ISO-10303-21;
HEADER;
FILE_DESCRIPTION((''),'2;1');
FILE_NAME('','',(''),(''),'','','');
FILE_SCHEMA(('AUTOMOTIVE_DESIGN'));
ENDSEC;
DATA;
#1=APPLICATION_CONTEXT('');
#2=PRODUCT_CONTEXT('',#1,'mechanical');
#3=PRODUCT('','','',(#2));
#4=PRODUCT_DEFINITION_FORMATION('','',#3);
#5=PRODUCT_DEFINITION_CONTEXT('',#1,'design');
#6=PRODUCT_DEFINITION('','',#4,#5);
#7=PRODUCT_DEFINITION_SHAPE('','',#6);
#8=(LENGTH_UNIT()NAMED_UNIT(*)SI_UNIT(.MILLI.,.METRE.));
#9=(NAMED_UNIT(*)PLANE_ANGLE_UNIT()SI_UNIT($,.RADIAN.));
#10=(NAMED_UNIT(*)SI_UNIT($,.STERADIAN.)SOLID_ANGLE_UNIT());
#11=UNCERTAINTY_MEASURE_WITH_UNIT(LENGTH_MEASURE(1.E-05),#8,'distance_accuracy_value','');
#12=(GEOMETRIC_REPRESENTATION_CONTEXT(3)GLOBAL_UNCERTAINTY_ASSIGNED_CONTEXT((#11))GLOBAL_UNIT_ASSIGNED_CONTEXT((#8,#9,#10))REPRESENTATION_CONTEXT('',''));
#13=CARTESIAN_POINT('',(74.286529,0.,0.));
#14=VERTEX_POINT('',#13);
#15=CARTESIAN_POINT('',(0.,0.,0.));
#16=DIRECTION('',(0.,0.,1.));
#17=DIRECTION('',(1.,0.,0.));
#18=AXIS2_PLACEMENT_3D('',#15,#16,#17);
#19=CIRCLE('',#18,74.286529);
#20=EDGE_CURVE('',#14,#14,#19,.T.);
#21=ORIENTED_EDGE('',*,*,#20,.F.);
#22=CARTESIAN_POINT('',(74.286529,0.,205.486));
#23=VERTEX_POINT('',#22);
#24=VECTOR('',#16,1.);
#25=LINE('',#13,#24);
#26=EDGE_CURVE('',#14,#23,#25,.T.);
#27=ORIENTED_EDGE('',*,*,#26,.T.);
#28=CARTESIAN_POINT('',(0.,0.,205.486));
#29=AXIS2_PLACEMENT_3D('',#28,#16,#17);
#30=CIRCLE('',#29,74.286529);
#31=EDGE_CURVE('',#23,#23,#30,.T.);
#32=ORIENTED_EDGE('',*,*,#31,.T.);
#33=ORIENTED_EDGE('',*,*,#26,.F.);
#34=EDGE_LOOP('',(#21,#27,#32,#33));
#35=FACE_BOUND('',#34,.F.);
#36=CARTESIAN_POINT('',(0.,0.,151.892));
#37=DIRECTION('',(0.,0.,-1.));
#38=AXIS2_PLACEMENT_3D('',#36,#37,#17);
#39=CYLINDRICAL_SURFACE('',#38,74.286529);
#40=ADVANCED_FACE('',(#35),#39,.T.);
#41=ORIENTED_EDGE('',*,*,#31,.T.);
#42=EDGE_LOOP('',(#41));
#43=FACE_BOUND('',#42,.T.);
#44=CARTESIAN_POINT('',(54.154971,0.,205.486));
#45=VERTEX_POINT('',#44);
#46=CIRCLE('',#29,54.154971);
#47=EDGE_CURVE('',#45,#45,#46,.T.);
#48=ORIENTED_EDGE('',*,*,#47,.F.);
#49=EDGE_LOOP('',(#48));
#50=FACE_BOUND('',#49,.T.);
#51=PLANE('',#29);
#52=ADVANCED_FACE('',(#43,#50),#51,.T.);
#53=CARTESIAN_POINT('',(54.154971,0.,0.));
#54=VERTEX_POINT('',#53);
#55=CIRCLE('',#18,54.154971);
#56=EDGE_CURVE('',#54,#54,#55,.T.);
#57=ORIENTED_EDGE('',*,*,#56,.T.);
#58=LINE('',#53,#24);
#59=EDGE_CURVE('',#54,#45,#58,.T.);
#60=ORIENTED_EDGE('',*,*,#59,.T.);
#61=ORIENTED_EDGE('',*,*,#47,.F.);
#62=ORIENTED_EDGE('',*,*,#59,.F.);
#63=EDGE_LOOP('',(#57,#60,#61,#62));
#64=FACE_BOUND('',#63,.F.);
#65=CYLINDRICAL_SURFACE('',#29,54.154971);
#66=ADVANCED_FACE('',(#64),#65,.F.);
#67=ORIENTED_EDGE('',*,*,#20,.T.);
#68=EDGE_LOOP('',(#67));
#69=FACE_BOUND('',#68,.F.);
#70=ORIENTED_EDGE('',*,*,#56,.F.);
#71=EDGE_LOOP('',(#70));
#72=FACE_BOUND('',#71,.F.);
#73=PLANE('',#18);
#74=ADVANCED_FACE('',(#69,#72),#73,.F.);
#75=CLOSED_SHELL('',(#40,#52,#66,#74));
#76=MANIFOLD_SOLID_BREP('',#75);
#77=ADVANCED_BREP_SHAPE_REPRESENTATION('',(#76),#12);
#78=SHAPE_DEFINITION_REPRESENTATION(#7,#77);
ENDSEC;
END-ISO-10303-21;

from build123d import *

# Parameters (mm, degrees)
F0_R     = 74.2865291694
F1_DEPTH = 151.892
F2_DEPTH = 53.594
F3_R     = 54.1549709352
F4_DEPTH = 195.58
F5_DEPTH = 92.202


# Not quite as in the source:
# - a feature names something its author has since deleted; it is built from what else it names


with BuildPart() as f1:
    # F0 (on Top) → F1 (new body)
    with BuildSketch(Plane.XY):
        Circle(F0_R)
    extrude(amount=F1_DEPTH)

    # F2 (add): a face of the model
    f2_faces = [f1.faces().sort_by_distance(p)[0] for p in [
        (0, 0, 151.892),
    ]]
    extrude(f2_faces, amount=F2_DEPTH)

    # F3 (on face) → F4 (cut)
    with BuildSketch(Plane.XY.offset(205.486)):
        Circle(F3_R)
    extrude(amount=-F4_DEPTH, mode=Mode.SUBTRACT)

    # F5 (cut): a face of the model
    f5_faces = [f1.faces().sort_by_distance(p)[0] for p in [
        (0, 0, 9.906),
    ]]
    extrude(f5_faces, amount=-F5_DEPTH, mode=Mode.SUBTRACT)


solid = f1.part
